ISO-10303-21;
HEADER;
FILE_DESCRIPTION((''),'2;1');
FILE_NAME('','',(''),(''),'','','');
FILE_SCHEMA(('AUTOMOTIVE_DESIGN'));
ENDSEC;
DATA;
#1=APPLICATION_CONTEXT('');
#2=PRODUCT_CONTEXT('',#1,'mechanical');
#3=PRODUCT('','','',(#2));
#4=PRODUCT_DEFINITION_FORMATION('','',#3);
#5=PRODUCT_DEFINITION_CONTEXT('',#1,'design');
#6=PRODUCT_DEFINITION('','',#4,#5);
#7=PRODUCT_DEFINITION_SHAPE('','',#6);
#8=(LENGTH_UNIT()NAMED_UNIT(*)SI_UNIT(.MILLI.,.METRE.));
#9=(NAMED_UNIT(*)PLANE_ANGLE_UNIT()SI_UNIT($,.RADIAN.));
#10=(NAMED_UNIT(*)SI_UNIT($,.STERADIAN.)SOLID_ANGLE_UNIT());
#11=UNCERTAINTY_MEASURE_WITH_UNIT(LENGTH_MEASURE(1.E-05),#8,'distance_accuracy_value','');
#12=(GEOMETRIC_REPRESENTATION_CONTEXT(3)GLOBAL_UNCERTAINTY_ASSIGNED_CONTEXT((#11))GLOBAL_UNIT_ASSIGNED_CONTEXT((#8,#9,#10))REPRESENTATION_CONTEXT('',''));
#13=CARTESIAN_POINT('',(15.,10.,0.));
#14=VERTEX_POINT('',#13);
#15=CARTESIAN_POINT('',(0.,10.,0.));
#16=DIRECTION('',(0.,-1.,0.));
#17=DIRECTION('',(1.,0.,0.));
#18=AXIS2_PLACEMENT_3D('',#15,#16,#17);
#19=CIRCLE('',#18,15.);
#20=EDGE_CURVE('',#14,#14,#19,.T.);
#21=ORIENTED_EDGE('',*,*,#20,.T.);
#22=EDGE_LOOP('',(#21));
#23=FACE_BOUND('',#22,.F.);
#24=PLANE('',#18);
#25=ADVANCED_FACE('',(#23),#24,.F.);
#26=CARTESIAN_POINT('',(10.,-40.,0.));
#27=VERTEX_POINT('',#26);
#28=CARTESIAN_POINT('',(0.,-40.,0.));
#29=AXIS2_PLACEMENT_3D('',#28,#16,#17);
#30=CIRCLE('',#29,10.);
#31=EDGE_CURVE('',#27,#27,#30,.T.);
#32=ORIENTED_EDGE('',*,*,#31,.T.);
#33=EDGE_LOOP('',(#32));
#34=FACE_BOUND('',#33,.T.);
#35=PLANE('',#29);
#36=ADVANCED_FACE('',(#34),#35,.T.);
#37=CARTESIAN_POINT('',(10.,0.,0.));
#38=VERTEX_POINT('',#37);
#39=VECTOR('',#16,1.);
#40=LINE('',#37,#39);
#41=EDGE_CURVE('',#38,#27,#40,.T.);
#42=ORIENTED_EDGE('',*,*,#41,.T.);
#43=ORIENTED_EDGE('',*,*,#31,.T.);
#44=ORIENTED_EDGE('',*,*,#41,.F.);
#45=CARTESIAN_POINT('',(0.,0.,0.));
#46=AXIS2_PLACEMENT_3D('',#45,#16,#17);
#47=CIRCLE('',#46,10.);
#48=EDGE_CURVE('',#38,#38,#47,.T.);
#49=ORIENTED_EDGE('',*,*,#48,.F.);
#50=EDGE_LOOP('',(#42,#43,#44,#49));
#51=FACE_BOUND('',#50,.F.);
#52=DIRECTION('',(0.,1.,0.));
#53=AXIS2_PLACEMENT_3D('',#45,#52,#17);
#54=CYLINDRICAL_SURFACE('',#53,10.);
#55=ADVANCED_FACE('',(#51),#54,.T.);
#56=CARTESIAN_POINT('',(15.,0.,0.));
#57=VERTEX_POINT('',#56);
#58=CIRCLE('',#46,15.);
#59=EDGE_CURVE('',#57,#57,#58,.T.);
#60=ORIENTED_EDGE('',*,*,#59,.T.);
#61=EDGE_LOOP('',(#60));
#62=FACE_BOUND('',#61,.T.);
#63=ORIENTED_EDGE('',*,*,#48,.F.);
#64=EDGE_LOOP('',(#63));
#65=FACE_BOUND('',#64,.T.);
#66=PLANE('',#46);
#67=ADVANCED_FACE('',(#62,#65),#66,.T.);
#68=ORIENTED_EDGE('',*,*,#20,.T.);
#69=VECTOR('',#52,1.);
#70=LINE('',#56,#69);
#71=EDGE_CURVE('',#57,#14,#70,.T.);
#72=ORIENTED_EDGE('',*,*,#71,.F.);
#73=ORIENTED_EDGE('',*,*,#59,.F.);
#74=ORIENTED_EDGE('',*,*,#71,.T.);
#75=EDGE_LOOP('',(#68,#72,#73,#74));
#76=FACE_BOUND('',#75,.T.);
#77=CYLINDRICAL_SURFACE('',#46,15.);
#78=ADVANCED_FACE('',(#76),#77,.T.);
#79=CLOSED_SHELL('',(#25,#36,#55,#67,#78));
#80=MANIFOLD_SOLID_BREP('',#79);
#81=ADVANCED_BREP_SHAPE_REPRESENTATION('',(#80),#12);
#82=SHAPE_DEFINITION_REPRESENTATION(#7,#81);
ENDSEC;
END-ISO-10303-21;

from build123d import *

# Parameters (mm, degrees)
F0_R     = 10
F1_DEPTH = 40
F0_R_2   = 15
F2_DEPTH = 10


# Not quite as in the source:
# - a feature names something its author has since deleted; it is built from what else it names


with BuildPart() as f1:
    # F0 (on Front) → F1 (new body)
    with BuildSketch(Plane.XZ):
        Circle(F0_R)
    extrude(amount=F1_DEPTH)

    # F0 (on Front) → F2 (join)
    with BuildSketch(Plane.XZ):
        Circle(F0_R_2)
        Circle(F0_R, mode=Mode.SUBTRACT)
        Circle(F0_R)
    extrude(amount=-F2_DEPTH)


solid = f1.part
